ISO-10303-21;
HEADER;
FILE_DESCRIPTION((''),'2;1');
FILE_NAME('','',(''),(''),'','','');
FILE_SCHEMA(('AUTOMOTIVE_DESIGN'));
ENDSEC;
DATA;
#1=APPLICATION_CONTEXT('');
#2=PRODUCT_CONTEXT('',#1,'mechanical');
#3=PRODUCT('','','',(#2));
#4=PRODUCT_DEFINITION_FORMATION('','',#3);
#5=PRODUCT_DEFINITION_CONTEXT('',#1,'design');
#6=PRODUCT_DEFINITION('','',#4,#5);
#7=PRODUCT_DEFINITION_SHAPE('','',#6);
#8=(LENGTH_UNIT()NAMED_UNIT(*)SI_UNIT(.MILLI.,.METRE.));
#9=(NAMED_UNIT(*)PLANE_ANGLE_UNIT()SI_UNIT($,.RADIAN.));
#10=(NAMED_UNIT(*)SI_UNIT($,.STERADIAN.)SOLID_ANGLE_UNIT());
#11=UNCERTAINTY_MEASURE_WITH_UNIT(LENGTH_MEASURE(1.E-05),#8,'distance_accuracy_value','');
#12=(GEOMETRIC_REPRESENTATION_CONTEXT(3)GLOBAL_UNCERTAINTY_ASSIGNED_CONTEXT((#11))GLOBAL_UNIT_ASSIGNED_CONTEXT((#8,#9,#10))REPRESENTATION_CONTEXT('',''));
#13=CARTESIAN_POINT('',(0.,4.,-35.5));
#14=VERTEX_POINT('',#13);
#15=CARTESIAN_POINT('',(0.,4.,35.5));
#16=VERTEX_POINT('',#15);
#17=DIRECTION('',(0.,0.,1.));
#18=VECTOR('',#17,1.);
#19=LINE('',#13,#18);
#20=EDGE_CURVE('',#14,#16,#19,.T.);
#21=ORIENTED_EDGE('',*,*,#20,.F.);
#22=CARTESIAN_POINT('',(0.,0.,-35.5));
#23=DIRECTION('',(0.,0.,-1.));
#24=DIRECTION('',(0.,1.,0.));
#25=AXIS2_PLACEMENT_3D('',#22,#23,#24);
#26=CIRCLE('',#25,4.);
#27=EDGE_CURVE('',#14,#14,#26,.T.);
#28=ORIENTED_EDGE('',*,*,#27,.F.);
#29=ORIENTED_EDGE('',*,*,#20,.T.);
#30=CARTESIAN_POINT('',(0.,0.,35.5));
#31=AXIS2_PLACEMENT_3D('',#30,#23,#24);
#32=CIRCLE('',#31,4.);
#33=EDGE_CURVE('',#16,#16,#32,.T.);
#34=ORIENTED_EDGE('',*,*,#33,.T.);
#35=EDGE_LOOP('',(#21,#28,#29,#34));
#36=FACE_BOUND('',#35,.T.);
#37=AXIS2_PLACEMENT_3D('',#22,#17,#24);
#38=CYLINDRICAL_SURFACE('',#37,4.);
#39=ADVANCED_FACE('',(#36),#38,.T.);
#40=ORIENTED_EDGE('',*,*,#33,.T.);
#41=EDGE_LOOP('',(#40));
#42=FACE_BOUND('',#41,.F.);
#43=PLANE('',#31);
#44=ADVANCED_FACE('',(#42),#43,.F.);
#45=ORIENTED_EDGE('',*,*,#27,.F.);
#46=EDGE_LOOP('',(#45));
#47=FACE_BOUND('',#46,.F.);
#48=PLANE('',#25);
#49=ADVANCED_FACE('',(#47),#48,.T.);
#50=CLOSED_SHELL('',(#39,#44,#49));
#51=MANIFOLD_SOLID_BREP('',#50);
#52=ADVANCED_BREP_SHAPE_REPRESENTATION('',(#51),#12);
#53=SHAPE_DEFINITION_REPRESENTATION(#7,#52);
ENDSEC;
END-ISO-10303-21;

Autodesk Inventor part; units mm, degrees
ref_plane "YZ Plane" through (0, 0, 0) normal (1, 0, 0) x (0, 1, 0)
ref_plane "XZ Plane" through (0, 0, 0) normal (0, 1, 0) x (-1, 0, 0)
sketch "Sketch1" plane through (0, 0, 0) normal (1, 0, 0) x (0, 1, 0)
  line L0 (-4, -35.5) -> (4, -35.5)
  line L1 (4, -35.5) -> (4, 35.5)
  line L2 (4, 35.5) -> (-4, 35.5)
  line L3 (-4, 35.5) -> (-4, -35.5)
  line L4 (-4, -35.5) -> (4, 35.5) construction
  line L5 (4, -35.5) -> (-4, 35.5) construction
  line L6 (0, 35.5) -> (0, -35.5)
  point P0 (0, 0)
  dimension "d0" = 8
  dimension "d1" = 71
revolve "Revolution1" add sketch "Sketch1" angle 360 about axis through (0, 0, 35.5) along (0, 0, -1) contours L6 L2 L1 L0
thread "Thread1" size "M8x1.25" class "6g" standard "ANSI Metric M Profile" length 25
ref_plane "Work Plane1" through (0, 0, 25) normal (0, 0, 1) x (1, 0, 0)
sketch "Sketch3" plane through (0, 0, 25) normal (0, 0, 1) x (1, 0, 0)
  point P0 (0, 0)
thread "Thread2" size "M8x1.25" class "6g" standard "ANSI Metric M Profile" length 14
properties part number "HUDSON-1-49A"
